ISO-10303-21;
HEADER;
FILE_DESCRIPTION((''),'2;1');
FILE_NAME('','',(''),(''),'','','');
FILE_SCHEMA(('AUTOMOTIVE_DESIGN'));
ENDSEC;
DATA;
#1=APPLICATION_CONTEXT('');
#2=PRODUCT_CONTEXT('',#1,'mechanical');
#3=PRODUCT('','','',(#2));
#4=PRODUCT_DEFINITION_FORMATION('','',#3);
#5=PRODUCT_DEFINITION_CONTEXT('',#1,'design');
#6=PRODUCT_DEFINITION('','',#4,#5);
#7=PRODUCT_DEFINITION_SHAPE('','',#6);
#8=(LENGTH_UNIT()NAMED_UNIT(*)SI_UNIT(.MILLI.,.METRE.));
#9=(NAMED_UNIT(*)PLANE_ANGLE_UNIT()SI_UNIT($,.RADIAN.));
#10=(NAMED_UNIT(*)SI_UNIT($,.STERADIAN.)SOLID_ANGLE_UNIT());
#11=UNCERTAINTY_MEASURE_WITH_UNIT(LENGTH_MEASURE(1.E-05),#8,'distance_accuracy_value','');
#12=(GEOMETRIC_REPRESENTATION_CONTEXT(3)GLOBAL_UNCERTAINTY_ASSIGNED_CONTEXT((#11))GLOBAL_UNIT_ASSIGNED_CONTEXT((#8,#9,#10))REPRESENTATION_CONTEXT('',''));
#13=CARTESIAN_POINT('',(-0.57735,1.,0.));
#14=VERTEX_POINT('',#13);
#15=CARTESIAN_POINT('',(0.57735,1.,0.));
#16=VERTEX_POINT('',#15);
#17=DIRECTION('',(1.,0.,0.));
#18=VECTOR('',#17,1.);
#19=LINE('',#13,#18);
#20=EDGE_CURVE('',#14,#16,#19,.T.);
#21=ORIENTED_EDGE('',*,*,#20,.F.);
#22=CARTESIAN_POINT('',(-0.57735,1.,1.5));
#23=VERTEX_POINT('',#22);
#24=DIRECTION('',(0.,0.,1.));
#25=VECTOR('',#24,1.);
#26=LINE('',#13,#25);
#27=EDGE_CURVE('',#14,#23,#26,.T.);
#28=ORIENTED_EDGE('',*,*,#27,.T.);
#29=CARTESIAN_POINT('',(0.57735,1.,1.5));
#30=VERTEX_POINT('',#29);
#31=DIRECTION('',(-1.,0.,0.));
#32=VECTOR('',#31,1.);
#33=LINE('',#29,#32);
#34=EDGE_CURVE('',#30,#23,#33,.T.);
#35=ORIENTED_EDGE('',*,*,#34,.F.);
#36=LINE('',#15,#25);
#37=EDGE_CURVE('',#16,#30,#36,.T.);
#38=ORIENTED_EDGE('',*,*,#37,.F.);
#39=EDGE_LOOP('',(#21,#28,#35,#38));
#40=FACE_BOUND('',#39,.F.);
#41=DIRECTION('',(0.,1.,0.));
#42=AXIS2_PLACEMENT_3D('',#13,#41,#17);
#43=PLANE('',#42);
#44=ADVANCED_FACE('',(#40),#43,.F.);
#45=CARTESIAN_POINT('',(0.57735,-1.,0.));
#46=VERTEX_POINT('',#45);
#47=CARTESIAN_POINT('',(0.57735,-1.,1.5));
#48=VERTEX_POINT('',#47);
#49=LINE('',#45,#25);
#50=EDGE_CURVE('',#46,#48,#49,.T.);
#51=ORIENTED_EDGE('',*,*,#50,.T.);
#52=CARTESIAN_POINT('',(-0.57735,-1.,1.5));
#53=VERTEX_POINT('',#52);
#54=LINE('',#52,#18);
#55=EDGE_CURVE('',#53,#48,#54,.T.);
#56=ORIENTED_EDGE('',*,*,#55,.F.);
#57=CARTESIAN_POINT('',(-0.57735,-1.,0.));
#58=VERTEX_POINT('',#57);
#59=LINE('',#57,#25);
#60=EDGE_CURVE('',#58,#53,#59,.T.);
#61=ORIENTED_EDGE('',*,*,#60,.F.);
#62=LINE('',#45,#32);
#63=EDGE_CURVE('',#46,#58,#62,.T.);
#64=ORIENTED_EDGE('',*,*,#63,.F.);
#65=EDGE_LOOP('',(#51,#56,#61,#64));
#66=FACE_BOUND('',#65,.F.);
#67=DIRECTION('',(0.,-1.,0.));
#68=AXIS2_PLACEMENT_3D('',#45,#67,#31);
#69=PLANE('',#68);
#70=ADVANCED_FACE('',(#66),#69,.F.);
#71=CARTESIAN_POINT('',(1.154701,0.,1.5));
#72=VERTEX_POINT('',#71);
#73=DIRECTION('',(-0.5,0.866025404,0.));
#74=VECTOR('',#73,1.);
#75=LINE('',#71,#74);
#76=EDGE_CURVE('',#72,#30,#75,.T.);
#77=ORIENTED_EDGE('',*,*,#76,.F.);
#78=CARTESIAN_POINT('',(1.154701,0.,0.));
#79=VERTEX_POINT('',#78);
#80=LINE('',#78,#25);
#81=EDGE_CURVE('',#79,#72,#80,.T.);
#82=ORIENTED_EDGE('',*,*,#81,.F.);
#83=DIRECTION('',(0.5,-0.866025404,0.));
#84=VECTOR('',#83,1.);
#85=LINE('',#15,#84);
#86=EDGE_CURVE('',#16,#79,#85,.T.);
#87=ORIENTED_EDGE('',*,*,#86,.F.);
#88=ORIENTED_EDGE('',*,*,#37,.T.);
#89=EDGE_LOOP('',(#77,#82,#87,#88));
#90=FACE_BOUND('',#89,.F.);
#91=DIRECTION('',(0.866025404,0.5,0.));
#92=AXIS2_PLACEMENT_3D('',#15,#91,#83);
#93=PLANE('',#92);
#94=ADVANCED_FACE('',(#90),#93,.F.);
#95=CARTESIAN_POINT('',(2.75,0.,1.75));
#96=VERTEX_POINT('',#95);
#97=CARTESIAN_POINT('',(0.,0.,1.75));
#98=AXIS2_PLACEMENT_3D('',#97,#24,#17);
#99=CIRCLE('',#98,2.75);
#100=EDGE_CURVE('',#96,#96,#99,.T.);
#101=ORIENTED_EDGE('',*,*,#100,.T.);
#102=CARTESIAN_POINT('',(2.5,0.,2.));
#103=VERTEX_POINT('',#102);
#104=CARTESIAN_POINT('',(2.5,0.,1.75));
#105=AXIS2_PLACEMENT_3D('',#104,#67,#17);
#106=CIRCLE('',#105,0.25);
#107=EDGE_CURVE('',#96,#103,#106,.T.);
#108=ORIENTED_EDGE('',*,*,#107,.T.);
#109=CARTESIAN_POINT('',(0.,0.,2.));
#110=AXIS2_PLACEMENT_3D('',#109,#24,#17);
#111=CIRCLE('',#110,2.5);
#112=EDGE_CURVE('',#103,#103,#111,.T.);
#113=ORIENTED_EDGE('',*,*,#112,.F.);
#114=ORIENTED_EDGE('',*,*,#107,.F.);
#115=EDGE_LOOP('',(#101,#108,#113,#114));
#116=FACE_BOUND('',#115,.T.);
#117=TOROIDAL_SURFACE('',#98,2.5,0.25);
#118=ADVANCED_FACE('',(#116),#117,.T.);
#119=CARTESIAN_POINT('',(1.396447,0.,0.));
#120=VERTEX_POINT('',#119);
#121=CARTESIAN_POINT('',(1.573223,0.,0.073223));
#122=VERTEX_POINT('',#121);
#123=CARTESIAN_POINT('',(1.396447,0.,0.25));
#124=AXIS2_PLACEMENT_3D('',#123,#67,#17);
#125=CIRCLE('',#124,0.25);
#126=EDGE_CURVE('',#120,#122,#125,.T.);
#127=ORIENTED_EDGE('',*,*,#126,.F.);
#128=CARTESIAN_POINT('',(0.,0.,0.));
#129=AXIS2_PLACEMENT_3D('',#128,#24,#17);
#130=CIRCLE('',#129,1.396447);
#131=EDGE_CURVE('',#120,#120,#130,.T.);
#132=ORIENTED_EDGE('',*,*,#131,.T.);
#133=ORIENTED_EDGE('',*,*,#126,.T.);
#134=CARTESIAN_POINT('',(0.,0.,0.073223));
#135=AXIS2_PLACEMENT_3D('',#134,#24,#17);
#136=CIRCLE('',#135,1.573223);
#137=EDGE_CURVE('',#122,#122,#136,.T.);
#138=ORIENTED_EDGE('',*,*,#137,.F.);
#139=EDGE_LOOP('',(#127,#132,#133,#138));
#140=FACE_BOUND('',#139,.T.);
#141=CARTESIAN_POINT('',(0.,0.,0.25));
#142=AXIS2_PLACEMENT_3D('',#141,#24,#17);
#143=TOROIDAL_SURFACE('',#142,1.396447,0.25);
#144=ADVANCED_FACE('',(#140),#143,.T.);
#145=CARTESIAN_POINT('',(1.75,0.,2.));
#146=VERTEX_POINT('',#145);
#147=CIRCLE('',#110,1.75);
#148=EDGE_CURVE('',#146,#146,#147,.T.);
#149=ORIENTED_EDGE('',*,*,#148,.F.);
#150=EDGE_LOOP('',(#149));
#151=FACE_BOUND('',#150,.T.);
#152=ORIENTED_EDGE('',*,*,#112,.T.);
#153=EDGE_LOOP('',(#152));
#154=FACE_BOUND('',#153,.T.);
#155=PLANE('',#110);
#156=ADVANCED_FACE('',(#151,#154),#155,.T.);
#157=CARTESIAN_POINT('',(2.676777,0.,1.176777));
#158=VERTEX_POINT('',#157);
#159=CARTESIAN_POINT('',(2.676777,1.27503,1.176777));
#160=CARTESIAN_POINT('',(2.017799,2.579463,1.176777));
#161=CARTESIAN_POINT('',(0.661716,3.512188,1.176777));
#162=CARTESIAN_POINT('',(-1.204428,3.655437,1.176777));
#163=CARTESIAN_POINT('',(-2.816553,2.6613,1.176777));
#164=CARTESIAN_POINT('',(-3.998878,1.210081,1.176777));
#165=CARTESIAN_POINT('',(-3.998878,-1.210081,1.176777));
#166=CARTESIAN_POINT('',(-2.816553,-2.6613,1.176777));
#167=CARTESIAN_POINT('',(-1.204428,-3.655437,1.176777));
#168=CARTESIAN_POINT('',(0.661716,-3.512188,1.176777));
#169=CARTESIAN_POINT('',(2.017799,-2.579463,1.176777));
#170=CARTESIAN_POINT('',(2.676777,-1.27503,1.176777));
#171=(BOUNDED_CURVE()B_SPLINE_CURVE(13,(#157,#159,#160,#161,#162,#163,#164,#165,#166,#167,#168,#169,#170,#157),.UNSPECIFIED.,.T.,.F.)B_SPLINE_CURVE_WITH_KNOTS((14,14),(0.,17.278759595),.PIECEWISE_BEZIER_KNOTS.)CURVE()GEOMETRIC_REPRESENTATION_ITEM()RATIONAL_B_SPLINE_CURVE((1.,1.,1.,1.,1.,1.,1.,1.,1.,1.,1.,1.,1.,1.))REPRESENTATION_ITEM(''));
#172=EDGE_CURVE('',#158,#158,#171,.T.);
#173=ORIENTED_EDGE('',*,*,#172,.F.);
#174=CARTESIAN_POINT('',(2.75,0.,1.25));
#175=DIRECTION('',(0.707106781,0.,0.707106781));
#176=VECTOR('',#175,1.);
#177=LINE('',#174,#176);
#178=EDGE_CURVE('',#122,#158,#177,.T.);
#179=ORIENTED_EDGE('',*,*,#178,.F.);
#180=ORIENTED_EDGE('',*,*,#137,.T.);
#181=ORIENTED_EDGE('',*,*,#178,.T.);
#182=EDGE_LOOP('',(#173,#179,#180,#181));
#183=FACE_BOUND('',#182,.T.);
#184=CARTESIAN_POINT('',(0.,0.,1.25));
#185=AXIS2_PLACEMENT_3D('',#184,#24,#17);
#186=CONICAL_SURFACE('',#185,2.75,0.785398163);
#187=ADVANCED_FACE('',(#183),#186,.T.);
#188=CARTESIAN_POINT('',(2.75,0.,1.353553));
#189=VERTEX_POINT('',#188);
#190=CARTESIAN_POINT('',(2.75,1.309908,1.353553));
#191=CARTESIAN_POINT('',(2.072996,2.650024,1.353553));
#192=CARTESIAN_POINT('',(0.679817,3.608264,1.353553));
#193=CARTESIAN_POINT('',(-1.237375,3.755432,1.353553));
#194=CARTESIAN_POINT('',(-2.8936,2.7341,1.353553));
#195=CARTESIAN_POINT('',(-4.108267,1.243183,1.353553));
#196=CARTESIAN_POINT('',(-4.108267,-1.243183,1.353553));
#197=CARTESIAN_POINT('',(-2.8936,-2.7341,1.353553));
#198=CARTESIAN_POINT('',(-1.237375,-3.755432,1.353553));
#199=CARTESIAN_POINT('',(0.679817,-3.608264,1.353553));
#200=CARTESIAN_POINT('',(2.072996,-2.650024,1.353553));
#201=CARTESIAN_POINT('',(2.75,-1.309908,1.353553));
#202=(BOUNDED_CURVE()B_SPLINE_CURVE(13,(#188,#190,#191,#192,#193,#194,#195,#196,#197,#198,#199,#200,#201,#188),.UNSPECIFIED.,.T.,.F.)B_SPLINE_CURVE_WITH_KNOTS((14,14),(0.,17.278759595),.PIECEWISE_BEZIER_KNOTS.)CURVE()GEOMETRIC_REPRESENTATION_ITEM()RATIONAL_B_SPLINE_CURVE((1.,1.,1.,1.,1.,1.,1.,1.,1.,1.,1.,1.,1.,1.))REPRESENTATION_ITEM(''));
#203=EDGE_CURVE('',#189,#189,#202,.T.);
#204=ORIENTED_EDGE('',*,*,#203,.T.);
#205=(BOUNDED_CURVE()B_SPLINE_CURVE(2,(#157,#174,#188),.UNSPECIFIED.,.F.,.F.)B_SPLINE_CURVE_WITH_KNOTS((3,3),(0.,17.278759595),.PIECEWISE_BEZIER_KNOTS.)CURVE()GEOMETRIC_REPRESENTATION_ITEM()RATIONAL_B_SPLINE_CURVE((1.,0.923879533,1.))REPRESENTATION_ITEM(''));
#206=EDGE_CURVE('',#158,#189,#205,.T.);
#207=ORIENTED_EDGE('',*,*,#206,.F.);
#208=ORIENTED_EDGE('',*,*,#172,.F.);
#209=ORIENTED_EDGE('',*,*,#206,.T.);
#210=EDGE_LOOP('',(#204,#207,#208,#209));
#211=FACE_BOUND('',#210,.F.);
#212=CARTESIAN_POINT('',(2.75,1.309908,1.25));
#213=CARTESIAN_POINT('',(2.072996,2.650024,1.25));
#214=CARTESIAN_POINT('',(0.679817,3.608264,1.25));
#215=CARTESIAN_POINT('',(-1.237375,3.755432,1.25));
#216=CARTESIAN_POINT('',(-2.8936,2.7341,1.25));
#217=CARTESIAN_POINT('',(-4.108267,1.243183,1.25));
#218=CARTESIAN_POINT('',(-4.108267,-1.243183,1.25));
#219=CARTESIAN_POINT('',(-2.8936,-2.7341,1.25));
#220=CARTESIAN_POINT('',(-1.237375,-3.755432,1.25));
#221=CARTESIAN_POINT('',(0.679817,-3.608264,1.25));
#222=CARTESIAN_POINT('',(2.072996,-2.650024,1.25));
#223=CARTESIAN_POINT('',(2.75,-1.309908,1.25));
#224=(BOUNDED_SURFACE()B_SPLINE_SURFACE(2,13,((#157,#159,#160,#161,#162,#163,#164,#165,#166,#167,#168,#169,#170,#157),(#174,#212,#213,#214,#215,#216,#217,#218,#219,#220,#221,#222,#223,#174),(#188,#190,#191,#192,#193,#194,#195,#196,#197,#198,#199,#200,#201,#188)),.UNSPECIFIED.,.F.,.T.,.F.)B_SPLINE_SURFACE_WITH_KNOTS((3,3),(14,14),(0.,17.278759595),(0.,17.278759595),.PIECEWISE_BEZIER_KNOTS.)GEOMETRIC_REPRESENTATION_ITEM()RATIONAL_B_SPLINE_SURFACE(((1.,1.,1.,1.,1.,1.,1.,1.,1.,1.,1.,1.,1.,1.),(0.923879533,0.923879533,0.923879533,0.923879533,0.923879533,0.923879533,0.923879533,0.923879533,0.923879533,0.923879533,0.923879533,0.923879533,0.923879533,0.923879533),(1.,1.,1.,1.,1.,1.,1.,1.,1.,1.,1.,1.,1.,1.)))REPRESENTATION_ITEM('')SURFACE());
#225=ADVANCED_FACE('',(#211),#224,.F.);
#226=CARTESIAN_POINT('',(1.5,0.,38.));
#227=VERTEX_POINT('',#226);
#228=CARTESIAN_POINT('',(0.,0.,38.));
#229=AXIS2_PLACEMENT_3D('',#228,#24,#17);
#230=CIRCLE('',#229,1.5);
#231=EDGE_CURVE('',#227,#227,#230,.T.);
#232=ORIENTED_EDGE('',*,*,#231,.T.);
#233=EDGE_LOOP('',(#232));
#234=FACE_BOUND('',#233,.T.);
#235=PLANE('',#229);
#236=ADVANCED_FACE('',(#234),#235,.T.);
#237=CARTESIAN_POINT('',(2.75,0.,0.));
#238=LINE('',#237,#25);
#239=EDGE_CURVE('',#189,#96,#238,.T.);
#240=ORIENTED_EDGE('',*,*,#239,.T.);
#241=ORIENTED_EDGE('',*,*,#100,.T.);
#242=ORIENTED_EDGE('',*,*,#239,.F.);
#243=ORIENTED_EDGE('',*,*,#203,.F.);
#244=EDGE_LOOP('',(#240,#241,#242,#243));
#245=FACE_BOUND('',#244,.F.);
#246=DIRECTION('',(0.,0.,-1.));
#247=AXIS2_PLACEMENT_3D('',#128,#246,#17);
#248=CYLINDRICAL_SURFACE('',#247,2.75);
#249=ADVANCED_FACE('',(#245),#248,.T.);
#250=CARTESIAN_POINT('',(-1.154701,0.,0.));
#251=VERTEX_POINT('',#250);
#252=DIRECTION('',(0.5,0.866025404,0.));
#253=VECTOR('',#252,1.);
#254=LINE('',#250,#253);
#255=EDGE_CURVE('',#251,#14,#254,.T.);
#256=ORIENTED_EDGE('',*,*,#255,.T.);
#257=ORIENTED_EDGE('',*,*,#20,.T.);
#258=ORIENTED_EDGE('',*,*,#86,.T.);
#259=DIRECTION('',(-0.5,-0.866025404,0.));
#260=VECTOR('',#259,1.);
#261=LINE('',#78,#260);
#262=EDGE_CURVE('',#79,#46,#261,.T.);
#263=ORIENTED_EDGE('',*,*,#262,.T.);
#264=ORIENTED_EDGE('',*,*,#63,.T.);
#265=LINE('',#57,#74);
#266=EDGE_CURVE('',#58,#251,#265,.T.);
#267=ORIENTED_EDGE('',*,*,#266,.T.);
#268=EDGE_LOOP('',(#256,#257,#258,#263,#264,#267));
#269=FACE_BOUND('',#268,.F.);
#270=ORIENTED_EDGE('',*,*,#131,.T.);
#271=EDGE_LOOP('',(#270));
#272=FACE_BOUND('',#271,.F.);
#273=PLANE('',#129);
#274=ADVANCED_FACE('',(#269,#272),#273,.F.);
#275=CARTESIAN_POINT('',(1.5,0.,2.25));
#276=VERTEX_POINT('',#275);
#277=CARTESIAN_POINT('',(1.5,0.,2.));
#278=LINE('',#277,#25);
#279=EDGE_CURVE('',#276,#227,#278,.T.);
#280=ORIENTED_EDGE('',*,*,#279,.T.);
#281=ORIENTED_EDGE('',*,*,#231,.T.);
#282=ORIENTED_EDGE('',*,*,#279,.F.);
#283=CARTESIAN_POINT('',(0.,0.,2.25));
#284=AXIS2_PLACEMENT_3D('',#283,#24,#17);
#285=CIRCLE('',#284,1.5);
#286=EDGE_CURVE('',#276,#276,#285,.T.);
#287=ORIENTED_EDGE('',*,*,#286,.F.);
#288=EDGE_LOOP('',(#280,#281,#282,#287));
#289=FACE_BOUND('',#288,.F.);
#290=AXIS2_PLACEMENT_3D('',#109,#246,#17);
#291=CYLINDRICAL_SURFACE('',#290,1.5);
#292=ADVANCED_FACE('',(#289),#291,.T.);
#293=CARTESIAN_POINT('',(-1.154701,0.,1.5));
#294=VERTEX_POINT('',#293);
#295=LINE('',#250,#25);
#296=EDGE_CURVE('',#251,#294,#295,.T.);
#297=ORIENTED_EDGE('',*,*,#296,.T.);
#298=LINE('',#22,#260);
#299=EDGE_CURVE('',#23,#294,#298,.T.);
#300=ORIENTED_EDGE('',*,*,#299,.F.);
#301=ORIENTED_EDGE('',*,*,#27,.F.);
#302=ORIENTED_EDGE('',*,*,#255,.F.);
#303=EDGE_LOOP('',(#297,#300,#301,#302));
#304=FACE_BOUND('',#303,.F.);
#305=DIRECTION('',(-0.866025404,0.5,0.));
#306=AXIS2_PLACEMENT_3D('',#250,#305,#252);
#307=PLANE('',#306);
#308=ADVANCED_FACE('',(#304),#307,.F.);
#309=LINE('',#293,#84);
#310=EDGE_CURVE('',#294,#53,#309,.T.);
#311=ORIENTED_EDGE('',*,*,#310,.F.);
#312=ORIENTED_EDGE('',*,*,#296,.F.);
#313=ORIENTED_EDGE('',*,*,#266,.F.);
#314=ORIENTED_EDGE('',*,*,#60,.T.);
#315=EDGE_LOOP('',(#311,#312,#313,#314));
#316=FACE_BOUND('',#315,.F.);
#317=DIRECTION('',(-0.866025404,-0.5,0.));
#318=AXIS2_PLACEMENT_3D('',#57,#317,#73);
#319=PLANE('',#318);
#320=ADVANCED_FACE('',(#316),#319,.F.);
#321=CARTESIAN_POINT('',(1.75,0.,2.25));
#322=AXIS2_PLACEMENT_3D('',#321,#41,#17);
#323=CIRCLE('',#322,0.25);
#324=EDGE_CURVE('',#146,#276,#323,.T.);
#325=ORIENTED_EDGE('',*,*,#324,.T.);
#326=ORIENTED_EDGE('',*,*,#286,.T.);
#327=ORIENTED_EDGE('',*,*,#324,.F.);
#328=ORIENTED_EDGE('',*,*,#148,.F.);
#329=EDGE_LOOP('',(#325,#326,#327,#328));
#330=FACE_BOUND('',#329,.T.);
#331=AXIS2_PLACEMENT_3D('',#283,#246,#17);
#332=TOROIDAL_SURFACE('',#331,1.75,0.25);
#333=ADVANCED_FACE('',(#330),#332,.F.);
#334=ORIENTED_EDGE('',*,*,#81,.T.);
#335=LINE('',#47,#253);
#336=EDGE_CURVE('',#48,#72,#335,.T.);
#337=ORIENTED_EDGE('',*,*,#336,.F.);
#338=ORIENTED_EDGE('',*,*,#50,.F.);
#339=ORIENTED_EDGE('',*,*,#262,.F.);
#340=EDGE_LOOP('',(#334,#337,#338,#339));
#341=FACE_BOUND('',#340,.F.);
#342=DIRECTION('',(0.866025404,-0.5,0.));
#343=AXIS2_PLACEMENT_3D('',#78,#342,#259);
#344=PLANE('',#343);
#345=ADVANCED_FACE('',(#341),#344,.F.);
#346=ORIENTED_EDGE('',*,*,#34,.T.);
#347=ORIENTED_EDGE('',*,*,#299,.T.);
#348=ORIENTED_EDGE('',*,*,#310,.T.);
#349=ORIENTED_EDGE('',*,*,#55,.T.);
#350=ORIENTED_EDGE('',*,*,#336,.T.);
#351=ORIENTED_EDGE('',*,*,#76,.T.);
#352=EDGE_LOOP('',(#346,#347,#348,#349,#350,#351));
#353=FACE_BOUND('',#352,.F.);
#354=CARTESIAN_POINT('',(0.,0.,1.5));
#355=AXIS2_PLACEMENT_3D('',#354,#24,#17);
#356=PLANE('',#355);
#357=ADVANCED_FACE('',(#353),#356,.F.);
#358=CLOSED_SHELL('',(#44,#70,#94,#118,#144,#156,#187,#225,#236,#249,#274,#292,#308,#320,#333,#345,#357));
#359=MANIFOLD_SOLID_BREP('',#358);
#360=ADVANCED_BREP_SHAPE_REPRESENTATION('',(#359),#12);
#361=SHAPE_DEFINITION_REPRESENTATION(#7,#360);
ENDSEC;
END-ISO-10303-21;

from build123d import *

# Parameters (mm, degrees)
F1_R     = 2.75
F1_R_2   = 1.5
F2_DEPTH = 2
F3_START = 1.5
F3_DEPTH = 0.5
F4_START = 2
F4_DEPTH = 36
F5_SIZE2 = 1.25
F5_SIZE  = 1.25
F6_R     = 0.25


# Not quite as in the source:
# - a feature names something its author has since deleted; it is built from what else it names


with BuildPart() as f2:
    # F1 (on Top) → F2 (new body)
    with BuildSketch(Plane.XY):
        Circle(F1_R)
        Circle(F1_R_2, mode=Mode.SUBTRACT)
        Circle(F1_R_2)
        Polygon((-0.5773502692, -1), (-1.1547005384, 0), (-0.5773502692, 1), (0.5773502692, 1), (1.1547005384, 0), (0.5773502692, -1), align=None, mode=Mode.SUBTRACT)
    extrude(amount=F2_DEPTH)

    # F1 (on Top) → F3 (join)
    with BuildSketch(Plane.XY.offset(F3_START)):
        Polygon((-0.5773502692, 1), (-1.1547005384, 0), (-0.5773502692, -1), (0.5773502692, -1), (1.1547005384, 0), (0.5773502692, 1), align=None)
    extrude(amount=F3_DEPTH)

    # F1 (on Top) → F4 (join)
    with BuildSketch(Plane.XY.offset(F4_START)):
        Circle(F1_R_2)
        Polygon((-0.5773502692, -1), (-1.1547005384, 0), (-0.5773502692, 1), (0.5773502692, 1), (1.1547005384, 0), (0.5773502692, -1), align=None, mode=Mode.SUBTRACT)
        Polygon((-0.5773502692, 1), (-1.1547005384, 0), (-0.5773502692, -1), (0.5773502692, -1), (1.1547005384, 0), (0.5773502692, 1), align=None)
    extrude(amount=F4_DEPTH)

    # F5
    f5_edges = [f2.edges().sort_by_distance(p)[0] for p in [
        (-2.75, 0, 0),
    ]]
    chamfer(f5_edges, length=F5_SIZE, length2=F5_SIZE2)

    # F6
    f6_edges = [f2.edges().sort_by_distance(p)[0] for p in [
        (-2.75, 0, 2),
        (-1.5, 0, 2),
        (-1.5, 0, 0),
        (-2.75, 0, 1.25),
    ]]
    fillet(f6_edges, radius=F6_R)


solid = f2.part
